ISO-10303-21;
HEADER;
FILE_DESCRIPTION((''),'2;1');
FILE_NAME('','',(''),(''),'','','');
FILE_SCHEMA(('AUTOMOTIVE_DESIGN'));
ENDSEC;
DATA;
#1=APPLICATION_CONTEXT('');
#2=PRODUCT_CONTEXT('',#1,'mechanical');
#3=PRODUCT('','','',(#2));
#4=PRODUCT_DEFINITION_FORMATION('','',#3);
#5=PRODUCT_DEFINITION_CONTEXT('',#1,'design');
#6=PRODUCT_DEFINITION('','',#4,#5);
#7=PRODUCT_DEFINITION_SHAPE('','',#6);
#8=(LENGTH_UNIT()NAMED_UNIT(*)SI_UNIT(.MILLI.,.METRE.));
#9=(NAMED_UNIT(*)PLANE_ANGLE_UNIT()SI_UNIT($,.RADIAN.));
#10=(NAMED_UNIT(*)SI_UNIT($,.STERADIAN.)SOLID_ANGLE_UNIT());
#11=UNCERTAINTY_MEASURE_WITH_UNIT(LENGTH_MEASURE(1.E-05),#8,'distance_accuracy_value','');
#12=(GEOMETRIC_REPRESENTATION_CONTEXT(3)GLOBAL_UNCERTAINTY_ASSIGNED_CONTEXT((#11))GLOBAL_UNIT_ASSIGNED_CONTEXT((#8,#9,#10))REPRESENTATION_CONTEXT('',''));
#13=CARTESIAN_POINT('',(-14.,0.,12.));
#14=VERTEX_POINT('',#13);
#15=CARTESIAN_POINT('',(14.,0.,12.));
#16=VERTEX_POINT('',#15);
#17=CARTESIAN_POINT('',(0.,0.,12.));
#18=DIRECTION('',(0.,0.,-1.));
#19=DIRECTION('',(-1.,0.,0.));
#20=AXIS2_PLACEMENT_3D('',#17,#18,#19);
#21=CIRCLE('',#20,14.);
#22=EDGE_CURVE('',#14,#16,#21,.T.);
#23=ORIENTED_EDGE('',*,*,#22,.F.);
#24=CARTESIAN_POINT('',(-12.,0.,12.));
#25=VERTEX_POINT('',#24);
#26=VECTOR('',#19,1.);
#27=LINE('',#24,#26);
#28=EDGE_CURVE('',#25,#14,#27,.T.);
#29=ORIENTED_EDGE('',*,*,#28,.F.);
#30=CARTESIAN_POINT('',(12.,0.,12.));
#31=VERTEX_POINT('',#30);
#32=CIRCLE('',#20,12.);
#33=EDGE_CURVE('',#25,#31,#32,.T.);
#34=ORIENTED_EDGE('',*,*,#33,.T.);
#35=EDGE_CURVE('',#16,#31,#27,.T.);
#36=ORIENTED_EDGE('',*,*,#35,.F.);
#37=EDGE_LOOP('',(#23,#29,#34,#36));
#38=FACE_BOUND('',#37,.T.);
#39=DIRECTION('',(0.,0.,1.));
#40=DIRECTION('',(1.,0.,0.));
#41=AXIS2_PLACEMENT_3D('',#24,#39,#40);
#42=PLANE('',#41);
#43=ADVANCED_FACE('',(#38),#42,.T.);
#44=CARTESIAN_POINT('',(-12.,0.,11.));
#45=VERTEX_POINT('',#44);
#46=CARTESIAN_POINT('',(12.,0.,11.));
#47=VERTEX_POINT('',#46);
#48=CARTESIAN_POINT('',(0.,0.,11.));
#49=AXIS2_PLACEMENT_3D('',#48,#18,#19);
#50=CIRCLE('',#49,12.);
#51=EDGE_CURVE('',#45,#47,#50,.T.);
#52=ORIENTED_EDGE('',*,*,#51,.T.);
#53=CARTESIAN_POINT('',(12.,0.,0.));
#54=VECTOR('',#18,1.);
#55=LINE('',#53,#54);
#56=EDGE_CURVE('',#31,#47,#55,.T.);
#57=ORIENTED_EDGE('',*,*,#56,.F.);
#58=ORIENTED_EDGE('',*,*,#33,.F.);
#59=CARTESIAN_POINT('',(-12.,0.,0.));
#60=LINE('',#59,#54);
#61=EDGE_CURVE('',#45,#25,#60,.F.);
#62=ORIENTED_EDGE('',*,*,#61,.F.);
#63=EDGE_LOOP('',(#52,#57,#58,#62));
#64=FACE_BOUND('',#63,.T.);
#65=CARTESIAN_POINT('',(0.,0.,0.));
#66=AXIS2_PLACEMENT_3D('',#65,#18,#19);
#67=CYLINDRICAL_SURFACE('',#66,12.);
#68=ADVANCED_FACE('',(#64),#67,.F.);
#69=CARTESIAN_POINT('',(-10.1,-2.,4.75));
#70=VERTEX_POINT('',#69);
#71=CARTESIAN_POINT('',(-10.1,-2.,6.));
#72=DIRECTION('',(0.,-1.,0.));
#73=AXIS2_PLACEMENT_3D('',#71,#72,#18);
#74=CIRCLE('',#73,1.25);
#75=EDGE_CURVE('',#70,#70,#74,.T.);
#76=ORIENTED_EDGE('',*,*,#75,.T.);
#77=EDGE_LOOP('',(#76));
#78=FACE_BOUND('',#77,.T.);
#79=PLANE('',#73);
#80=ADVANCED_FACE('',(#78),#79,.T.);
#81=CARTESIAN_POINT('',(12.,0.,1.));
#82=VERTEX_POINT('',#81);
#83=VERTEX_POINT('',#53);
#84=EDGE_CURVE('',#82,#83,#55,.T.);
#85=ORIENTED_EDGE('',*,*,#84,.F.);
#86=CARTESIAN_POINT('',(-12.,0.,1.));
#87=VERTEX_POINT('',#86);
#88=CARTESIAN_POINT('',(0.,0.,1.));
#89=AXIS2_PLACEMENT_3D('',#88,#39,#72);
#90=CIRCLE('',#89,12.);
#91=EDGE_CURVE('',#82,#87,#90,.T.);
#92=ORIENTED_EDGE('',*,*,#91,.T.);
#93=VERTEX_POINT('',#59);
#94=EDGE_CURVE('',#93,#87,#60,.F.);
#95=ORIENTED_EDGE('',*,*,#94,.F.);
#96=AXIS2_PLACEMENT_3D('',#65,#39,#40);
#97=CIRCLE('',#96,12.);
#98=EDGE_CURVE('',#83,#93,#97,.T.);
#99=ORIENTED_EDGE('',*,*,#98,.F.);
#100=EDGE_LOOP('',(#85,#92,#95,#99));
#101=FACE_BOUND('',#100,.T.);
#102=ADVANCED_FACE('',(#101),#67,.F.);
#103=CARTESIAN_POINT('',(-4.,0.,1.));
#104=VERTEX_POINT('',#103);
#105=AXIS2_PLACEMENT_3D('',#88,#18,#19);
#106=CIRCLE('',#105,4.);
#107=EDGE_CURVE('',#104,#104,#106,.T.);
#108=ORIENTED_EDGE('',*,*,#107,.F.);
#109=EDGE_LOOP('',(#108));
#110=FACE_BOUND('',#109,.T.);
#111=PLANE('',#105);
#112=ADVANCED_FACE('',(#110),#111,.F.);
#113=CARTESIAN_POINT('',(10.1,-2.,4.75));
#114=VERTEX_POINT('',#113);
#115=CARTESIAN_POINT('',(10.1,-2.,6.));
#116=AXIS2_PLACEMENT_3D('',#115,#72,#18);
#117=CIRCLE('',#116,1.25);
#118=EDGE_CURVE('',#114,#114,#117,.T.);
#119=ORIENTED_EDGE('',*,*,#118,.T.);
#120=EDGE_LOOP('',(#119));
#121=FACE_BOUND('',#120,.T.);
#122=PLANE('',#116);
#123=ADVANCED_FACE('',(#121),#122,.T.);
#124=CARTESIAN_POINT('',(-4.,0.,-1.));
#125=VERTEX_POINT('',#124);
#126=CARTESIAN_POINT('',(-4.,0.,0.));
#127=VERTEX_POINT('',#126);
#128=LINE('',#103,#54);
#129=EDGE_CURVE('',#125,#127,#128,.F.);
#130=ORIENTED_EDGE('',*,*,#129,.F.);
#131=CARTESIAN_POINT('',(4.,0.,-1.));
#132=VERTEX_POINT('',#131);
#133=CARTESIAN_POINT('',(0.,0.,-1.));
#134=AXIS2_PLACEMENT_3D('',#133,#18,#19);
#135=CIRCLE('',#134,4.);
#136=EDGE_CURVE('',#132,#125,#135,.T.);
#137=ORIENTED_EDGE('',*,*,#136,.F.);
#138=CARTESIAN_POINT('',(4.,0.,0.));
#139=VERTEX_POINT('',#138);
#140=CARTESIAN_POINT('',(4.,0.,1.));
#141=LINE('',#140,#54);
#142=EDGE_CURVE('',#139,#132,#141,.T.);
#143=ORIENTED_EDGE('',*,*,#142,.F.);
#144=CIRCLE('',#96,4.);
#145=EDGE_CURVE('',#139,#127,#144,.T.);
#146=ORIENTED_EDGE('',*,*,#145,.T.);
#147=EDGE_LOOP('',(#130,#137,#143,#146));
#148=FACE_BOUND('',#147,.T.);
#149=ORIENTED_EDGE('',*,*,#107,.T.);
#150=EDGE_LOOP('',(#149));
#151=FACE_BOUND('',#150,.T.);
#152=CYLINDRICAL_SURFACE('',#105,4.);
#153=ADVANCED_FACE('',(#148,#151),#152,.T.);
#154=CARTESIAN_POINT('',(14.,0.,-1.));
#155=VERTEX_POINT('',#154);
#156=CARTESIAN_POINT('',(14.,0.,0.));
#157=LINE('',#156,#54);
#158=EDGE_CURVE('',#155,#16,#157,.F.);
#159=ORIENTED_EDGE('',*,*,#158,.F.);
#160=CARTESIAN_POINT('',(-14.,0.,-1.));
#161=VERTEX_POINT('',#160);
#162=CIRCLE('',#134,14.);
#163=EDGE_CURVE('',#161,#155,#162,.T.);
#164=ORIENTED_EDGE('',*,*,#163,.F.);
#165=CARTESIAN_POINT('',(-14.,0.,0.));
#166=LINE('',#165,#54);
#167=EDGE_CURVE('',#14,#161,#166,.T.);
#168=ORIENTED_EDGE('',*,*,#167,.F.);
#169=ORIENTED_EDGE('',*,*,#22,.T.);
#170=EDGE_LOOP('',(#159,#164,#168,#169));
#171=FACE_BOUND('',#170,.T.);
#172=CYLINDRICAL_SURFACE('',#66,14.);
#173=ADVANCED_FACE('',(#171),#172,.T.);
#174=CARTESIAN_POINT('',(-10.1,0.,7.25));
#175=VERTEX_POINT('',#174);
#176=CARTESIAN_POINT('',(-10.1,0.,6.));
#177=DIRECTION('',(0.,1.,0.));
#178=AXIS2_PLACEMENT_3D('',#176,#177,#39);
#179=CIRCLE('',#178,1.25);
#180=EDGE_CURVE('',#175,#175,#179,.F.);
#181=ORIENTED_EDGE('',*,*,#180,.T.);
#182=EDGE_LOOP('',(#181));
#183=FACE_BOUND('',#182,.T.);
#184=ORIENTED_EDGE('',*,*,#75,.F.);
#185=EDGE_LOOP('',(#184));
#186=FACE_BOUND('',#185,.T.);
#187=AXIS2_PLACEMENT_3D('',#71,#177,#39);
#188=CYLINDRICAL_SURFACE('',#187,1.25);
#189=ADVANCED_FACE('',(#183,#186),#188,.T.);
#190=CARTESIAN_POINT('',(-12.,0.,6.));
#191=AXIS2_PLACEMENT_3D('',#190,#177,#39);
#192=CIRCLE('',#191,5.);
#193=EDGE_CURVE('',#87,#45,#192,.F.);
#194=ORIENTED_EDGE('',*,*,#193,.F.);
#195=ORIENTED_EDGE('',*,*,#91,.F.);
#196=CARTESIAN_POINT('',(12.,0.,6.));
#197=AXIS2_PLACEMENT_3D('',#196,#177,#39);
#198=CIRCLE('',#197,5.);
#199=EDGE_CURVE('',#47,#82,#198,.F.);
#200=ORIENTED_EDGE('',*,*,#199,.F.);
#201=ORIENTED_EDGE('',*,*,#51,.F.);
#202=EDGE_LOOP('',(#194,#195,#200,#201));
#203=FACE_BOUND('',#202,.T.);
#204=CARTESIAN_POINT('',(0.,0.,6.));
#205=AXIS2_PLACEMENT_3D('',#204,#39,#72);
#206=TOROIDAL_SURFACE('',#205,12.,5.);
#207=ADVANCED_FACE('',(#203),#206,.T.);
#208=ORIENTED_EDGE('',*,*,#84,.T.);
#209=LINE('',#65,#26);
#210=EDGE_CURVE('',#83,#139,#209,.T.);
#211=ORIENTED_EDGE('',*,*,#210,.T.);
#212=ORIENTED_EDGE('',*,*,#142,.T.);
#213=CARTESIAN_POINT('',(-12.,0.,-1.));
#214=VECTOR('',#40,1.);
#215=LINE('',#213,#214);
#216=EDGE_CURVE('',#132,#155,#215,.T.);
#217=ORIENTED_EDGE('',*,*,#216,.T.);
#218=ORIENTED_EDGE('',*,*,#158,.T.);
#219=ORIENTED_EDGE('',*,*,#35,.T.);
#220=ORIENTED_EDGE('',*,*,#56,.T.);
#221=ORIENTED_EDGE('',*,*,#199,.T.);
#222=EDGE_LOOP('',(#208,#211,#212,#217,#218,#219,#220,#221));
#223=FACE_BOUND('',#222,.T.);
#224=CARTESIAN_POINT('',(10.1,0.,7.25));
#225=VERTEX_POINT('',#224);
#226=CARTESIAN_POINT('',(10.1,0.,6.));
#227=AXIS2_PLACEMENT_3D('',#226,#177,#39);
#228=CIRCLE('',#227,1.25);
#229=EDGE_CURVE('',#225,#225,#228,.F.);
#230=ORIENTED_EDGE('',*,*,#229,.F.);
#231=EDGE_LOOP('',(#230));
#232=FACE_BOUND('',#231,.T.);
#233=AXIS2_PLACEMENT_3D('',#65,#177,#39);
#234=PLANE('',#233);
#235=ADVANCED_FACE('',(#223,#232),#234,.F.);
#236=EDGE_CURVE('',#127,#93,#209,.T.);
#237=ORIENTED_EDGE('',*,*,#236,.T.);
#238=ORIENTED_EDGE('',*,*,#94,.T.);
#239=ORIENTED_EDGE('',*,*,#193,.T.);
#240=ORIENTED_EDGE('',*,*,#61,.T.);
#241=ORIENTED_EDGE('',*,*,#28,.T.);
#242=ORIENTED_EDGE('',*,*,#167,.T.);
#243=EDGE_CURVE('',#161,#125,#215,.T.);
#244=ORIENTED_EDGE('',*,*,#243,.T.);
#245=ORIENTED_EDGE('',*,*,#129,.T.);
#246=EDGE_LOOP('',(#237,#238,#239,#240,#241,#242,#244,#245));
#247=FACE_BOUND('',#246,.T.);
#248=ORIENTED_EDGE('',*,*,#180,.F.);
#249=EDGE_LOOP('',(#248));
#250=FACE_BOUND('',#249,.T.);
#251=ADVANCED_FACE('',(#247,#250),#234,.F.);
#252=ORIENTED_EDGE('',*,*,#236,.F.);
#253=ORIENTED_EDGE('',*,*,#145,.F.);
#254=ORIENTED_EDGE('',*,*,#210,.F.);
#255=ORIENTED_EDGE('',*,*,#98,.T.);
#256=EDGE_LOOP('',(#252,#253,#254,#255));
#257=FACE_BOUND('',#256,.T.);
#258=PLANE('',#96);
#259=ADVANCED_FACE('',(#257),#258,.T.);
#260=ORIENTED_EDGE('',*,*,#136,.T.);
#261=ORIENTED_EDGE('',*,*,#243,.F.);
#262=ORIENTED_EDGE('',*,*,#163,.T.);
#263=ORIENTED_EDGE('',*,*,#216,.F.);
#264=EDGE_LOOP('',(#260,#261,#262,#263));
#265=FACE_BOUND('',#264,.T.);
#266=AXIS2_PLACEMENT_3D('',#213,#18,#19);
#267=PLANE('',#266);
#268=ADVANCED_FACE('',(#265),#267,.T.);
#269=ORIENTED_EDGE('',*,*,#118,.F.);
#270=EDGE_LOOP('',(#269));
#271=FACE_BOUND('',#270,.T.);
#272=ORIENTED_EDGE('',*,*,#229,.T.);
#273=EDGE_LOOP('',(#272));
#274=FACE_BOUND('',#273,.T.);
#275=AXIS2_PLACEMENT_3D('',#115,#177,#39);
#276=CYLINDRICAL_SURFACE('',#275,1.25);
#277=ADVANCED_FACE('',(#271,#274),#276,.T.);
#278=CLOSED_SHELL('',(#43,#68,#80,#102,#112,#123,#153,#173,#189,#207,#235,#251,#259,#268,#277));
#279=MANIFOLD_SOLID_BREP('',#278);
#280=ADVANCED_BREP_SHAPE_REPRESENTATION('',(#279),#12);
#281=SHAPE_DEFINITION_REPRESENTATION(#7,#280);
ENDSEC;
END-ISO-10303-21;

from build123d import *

# Parameters (mm, degrees)
SKETCH_1_R              = 12
EXTRUDE_1_DEPTH         = 12
DELETE_BODY_1_OUTLINE_R = 5
DELETE_BODY_1_DEPTH     = 12
EXTRUDE_START           = -1
SKETCH_2_R              = 12
EXTRUDE_2_DEPTH         = 1
SKETCH_3_W              = 2
SKETCH_3_H              = 13
SKETCH_5_W              = 34.262916627
SKETCH_5_H              = 20.154656839
CUT_EXTRUDE_3_DEPTH     = 24.151673806
SKETCH_6_R              = 1.25
EXTRUDE_4_DEPTH         = 2
SKETCH_7_R              = 4
EXTRUDE_5_DEPTH         = 2


# Read off the part's stored shape, not the designer's step: 型腔1, 实体-删除/保留 1
with BuildPart() as part:
    # 草图1 → 凸台-拉伸1 (new body)
    with BuildSketch(Plane.XY):
        Circle(SKETCH_1_R)
    extrude(amount=EXTRUDE_1_DEPTH)

    # 型腔1 outline → 型腔1 (revolve, cut)
    with BuildSketch(Plane.XZ):
        with BuildLine():
            Line((12, 12), (4, 12))
            Line((4, 12), (4, 8))
            Line((4, 8), (5, 8))
            Line((5, 8), (5, 4))
            Line((5, 4), (4, 4))
            Line((4, 4), (4, 0))
            Line((4, 0), (12, 0))
            Line((12, 0), (12, 1))
            ThreePointArc((12, 1), (7, 6), (12, 11))
            Line((12, 11), (12, 12))
        make_face()
    revolve(axis=Axis((0, 0, 0), (0, 0, 1)), mode=Mode.SUBTRACT)

    # Delete Body 1 outline → Delete Body 1 (cut)
    with BuildSketch(Plane.XY):
        Circle(DELETE_BODY_1_OUTLINE_R)
    extrude(amount=DELETE_BODY_1_DEPTH, mode=Mode.SUBTRACT)



with BuildPart() as body_2:
    # 草图2 → 凸台-拉伸2 (new body)
    with BuildSketch(Plane.XY.offset(EXTRUDE_START)):
        with Locations(Location((0, 0, 0), (0, 0, 270))):
            Circle(SKETCH_2_R)
    extrude(amount=EXTRUDE_2_DEPTH)


with BuildPart() as part_1:
    add(part.part)

    add(body_2.part)  # 旋转1 merges body 2
    # 草图3 → 旋转1 (revolve)
    with BuildSketch(Plane(origin=(0, 0, 0), x_dir=(1, 0, 0), z_dir=(0, 1, 0))):
        with Locations((-13, -5.5)):
            Rectangle(SKETCH_3_W, SKETCH_3_H)
    revolve(axis=Axis((0, 0, 0), (0, 0, 1)))

    # 草图5 → 切除-拉伸3 (cut, through all)
    with BuildSketch(Plane(origin=(0, 0, 0), x_dir=(1, 0, 0), z_dir=(0, 1, 0))):
        with Locations((0.6382308, -6.140467699)):
            Rectangle(SKETCH_5_W, SKETCH_5_H)
    extrude(amount=-CUT_EXTRUDE_3_DEPTH, mode=Mode.SUBTRACT)

    # 草图6 → 凸台-拉伸4 (add)
    with BuildSketch(Plane.XZ):
        with Locations(Location((-10.1, 6, 0), (0, 0, 90))):
            Circle(SKETCH_6_R)
        with Locations(Location((10.1, 6, 0), (0, 0, 90))):
            Circle(SKETCH_6_R)
    extrude(amount=EXTRUDE_4_DEPTH)

    # 草图7 → 凸台-拉伸5 (add)
    with BuildSketch(Plane(origin=(0, 0, -1), x_dir=(-1, 0, 0), z_dir=(0, 0, -1))):
        Circle(SKETCH_7_R)
    extrude(amount=-EXTRUDE_5_DEPTH)


solid = part_1.part
